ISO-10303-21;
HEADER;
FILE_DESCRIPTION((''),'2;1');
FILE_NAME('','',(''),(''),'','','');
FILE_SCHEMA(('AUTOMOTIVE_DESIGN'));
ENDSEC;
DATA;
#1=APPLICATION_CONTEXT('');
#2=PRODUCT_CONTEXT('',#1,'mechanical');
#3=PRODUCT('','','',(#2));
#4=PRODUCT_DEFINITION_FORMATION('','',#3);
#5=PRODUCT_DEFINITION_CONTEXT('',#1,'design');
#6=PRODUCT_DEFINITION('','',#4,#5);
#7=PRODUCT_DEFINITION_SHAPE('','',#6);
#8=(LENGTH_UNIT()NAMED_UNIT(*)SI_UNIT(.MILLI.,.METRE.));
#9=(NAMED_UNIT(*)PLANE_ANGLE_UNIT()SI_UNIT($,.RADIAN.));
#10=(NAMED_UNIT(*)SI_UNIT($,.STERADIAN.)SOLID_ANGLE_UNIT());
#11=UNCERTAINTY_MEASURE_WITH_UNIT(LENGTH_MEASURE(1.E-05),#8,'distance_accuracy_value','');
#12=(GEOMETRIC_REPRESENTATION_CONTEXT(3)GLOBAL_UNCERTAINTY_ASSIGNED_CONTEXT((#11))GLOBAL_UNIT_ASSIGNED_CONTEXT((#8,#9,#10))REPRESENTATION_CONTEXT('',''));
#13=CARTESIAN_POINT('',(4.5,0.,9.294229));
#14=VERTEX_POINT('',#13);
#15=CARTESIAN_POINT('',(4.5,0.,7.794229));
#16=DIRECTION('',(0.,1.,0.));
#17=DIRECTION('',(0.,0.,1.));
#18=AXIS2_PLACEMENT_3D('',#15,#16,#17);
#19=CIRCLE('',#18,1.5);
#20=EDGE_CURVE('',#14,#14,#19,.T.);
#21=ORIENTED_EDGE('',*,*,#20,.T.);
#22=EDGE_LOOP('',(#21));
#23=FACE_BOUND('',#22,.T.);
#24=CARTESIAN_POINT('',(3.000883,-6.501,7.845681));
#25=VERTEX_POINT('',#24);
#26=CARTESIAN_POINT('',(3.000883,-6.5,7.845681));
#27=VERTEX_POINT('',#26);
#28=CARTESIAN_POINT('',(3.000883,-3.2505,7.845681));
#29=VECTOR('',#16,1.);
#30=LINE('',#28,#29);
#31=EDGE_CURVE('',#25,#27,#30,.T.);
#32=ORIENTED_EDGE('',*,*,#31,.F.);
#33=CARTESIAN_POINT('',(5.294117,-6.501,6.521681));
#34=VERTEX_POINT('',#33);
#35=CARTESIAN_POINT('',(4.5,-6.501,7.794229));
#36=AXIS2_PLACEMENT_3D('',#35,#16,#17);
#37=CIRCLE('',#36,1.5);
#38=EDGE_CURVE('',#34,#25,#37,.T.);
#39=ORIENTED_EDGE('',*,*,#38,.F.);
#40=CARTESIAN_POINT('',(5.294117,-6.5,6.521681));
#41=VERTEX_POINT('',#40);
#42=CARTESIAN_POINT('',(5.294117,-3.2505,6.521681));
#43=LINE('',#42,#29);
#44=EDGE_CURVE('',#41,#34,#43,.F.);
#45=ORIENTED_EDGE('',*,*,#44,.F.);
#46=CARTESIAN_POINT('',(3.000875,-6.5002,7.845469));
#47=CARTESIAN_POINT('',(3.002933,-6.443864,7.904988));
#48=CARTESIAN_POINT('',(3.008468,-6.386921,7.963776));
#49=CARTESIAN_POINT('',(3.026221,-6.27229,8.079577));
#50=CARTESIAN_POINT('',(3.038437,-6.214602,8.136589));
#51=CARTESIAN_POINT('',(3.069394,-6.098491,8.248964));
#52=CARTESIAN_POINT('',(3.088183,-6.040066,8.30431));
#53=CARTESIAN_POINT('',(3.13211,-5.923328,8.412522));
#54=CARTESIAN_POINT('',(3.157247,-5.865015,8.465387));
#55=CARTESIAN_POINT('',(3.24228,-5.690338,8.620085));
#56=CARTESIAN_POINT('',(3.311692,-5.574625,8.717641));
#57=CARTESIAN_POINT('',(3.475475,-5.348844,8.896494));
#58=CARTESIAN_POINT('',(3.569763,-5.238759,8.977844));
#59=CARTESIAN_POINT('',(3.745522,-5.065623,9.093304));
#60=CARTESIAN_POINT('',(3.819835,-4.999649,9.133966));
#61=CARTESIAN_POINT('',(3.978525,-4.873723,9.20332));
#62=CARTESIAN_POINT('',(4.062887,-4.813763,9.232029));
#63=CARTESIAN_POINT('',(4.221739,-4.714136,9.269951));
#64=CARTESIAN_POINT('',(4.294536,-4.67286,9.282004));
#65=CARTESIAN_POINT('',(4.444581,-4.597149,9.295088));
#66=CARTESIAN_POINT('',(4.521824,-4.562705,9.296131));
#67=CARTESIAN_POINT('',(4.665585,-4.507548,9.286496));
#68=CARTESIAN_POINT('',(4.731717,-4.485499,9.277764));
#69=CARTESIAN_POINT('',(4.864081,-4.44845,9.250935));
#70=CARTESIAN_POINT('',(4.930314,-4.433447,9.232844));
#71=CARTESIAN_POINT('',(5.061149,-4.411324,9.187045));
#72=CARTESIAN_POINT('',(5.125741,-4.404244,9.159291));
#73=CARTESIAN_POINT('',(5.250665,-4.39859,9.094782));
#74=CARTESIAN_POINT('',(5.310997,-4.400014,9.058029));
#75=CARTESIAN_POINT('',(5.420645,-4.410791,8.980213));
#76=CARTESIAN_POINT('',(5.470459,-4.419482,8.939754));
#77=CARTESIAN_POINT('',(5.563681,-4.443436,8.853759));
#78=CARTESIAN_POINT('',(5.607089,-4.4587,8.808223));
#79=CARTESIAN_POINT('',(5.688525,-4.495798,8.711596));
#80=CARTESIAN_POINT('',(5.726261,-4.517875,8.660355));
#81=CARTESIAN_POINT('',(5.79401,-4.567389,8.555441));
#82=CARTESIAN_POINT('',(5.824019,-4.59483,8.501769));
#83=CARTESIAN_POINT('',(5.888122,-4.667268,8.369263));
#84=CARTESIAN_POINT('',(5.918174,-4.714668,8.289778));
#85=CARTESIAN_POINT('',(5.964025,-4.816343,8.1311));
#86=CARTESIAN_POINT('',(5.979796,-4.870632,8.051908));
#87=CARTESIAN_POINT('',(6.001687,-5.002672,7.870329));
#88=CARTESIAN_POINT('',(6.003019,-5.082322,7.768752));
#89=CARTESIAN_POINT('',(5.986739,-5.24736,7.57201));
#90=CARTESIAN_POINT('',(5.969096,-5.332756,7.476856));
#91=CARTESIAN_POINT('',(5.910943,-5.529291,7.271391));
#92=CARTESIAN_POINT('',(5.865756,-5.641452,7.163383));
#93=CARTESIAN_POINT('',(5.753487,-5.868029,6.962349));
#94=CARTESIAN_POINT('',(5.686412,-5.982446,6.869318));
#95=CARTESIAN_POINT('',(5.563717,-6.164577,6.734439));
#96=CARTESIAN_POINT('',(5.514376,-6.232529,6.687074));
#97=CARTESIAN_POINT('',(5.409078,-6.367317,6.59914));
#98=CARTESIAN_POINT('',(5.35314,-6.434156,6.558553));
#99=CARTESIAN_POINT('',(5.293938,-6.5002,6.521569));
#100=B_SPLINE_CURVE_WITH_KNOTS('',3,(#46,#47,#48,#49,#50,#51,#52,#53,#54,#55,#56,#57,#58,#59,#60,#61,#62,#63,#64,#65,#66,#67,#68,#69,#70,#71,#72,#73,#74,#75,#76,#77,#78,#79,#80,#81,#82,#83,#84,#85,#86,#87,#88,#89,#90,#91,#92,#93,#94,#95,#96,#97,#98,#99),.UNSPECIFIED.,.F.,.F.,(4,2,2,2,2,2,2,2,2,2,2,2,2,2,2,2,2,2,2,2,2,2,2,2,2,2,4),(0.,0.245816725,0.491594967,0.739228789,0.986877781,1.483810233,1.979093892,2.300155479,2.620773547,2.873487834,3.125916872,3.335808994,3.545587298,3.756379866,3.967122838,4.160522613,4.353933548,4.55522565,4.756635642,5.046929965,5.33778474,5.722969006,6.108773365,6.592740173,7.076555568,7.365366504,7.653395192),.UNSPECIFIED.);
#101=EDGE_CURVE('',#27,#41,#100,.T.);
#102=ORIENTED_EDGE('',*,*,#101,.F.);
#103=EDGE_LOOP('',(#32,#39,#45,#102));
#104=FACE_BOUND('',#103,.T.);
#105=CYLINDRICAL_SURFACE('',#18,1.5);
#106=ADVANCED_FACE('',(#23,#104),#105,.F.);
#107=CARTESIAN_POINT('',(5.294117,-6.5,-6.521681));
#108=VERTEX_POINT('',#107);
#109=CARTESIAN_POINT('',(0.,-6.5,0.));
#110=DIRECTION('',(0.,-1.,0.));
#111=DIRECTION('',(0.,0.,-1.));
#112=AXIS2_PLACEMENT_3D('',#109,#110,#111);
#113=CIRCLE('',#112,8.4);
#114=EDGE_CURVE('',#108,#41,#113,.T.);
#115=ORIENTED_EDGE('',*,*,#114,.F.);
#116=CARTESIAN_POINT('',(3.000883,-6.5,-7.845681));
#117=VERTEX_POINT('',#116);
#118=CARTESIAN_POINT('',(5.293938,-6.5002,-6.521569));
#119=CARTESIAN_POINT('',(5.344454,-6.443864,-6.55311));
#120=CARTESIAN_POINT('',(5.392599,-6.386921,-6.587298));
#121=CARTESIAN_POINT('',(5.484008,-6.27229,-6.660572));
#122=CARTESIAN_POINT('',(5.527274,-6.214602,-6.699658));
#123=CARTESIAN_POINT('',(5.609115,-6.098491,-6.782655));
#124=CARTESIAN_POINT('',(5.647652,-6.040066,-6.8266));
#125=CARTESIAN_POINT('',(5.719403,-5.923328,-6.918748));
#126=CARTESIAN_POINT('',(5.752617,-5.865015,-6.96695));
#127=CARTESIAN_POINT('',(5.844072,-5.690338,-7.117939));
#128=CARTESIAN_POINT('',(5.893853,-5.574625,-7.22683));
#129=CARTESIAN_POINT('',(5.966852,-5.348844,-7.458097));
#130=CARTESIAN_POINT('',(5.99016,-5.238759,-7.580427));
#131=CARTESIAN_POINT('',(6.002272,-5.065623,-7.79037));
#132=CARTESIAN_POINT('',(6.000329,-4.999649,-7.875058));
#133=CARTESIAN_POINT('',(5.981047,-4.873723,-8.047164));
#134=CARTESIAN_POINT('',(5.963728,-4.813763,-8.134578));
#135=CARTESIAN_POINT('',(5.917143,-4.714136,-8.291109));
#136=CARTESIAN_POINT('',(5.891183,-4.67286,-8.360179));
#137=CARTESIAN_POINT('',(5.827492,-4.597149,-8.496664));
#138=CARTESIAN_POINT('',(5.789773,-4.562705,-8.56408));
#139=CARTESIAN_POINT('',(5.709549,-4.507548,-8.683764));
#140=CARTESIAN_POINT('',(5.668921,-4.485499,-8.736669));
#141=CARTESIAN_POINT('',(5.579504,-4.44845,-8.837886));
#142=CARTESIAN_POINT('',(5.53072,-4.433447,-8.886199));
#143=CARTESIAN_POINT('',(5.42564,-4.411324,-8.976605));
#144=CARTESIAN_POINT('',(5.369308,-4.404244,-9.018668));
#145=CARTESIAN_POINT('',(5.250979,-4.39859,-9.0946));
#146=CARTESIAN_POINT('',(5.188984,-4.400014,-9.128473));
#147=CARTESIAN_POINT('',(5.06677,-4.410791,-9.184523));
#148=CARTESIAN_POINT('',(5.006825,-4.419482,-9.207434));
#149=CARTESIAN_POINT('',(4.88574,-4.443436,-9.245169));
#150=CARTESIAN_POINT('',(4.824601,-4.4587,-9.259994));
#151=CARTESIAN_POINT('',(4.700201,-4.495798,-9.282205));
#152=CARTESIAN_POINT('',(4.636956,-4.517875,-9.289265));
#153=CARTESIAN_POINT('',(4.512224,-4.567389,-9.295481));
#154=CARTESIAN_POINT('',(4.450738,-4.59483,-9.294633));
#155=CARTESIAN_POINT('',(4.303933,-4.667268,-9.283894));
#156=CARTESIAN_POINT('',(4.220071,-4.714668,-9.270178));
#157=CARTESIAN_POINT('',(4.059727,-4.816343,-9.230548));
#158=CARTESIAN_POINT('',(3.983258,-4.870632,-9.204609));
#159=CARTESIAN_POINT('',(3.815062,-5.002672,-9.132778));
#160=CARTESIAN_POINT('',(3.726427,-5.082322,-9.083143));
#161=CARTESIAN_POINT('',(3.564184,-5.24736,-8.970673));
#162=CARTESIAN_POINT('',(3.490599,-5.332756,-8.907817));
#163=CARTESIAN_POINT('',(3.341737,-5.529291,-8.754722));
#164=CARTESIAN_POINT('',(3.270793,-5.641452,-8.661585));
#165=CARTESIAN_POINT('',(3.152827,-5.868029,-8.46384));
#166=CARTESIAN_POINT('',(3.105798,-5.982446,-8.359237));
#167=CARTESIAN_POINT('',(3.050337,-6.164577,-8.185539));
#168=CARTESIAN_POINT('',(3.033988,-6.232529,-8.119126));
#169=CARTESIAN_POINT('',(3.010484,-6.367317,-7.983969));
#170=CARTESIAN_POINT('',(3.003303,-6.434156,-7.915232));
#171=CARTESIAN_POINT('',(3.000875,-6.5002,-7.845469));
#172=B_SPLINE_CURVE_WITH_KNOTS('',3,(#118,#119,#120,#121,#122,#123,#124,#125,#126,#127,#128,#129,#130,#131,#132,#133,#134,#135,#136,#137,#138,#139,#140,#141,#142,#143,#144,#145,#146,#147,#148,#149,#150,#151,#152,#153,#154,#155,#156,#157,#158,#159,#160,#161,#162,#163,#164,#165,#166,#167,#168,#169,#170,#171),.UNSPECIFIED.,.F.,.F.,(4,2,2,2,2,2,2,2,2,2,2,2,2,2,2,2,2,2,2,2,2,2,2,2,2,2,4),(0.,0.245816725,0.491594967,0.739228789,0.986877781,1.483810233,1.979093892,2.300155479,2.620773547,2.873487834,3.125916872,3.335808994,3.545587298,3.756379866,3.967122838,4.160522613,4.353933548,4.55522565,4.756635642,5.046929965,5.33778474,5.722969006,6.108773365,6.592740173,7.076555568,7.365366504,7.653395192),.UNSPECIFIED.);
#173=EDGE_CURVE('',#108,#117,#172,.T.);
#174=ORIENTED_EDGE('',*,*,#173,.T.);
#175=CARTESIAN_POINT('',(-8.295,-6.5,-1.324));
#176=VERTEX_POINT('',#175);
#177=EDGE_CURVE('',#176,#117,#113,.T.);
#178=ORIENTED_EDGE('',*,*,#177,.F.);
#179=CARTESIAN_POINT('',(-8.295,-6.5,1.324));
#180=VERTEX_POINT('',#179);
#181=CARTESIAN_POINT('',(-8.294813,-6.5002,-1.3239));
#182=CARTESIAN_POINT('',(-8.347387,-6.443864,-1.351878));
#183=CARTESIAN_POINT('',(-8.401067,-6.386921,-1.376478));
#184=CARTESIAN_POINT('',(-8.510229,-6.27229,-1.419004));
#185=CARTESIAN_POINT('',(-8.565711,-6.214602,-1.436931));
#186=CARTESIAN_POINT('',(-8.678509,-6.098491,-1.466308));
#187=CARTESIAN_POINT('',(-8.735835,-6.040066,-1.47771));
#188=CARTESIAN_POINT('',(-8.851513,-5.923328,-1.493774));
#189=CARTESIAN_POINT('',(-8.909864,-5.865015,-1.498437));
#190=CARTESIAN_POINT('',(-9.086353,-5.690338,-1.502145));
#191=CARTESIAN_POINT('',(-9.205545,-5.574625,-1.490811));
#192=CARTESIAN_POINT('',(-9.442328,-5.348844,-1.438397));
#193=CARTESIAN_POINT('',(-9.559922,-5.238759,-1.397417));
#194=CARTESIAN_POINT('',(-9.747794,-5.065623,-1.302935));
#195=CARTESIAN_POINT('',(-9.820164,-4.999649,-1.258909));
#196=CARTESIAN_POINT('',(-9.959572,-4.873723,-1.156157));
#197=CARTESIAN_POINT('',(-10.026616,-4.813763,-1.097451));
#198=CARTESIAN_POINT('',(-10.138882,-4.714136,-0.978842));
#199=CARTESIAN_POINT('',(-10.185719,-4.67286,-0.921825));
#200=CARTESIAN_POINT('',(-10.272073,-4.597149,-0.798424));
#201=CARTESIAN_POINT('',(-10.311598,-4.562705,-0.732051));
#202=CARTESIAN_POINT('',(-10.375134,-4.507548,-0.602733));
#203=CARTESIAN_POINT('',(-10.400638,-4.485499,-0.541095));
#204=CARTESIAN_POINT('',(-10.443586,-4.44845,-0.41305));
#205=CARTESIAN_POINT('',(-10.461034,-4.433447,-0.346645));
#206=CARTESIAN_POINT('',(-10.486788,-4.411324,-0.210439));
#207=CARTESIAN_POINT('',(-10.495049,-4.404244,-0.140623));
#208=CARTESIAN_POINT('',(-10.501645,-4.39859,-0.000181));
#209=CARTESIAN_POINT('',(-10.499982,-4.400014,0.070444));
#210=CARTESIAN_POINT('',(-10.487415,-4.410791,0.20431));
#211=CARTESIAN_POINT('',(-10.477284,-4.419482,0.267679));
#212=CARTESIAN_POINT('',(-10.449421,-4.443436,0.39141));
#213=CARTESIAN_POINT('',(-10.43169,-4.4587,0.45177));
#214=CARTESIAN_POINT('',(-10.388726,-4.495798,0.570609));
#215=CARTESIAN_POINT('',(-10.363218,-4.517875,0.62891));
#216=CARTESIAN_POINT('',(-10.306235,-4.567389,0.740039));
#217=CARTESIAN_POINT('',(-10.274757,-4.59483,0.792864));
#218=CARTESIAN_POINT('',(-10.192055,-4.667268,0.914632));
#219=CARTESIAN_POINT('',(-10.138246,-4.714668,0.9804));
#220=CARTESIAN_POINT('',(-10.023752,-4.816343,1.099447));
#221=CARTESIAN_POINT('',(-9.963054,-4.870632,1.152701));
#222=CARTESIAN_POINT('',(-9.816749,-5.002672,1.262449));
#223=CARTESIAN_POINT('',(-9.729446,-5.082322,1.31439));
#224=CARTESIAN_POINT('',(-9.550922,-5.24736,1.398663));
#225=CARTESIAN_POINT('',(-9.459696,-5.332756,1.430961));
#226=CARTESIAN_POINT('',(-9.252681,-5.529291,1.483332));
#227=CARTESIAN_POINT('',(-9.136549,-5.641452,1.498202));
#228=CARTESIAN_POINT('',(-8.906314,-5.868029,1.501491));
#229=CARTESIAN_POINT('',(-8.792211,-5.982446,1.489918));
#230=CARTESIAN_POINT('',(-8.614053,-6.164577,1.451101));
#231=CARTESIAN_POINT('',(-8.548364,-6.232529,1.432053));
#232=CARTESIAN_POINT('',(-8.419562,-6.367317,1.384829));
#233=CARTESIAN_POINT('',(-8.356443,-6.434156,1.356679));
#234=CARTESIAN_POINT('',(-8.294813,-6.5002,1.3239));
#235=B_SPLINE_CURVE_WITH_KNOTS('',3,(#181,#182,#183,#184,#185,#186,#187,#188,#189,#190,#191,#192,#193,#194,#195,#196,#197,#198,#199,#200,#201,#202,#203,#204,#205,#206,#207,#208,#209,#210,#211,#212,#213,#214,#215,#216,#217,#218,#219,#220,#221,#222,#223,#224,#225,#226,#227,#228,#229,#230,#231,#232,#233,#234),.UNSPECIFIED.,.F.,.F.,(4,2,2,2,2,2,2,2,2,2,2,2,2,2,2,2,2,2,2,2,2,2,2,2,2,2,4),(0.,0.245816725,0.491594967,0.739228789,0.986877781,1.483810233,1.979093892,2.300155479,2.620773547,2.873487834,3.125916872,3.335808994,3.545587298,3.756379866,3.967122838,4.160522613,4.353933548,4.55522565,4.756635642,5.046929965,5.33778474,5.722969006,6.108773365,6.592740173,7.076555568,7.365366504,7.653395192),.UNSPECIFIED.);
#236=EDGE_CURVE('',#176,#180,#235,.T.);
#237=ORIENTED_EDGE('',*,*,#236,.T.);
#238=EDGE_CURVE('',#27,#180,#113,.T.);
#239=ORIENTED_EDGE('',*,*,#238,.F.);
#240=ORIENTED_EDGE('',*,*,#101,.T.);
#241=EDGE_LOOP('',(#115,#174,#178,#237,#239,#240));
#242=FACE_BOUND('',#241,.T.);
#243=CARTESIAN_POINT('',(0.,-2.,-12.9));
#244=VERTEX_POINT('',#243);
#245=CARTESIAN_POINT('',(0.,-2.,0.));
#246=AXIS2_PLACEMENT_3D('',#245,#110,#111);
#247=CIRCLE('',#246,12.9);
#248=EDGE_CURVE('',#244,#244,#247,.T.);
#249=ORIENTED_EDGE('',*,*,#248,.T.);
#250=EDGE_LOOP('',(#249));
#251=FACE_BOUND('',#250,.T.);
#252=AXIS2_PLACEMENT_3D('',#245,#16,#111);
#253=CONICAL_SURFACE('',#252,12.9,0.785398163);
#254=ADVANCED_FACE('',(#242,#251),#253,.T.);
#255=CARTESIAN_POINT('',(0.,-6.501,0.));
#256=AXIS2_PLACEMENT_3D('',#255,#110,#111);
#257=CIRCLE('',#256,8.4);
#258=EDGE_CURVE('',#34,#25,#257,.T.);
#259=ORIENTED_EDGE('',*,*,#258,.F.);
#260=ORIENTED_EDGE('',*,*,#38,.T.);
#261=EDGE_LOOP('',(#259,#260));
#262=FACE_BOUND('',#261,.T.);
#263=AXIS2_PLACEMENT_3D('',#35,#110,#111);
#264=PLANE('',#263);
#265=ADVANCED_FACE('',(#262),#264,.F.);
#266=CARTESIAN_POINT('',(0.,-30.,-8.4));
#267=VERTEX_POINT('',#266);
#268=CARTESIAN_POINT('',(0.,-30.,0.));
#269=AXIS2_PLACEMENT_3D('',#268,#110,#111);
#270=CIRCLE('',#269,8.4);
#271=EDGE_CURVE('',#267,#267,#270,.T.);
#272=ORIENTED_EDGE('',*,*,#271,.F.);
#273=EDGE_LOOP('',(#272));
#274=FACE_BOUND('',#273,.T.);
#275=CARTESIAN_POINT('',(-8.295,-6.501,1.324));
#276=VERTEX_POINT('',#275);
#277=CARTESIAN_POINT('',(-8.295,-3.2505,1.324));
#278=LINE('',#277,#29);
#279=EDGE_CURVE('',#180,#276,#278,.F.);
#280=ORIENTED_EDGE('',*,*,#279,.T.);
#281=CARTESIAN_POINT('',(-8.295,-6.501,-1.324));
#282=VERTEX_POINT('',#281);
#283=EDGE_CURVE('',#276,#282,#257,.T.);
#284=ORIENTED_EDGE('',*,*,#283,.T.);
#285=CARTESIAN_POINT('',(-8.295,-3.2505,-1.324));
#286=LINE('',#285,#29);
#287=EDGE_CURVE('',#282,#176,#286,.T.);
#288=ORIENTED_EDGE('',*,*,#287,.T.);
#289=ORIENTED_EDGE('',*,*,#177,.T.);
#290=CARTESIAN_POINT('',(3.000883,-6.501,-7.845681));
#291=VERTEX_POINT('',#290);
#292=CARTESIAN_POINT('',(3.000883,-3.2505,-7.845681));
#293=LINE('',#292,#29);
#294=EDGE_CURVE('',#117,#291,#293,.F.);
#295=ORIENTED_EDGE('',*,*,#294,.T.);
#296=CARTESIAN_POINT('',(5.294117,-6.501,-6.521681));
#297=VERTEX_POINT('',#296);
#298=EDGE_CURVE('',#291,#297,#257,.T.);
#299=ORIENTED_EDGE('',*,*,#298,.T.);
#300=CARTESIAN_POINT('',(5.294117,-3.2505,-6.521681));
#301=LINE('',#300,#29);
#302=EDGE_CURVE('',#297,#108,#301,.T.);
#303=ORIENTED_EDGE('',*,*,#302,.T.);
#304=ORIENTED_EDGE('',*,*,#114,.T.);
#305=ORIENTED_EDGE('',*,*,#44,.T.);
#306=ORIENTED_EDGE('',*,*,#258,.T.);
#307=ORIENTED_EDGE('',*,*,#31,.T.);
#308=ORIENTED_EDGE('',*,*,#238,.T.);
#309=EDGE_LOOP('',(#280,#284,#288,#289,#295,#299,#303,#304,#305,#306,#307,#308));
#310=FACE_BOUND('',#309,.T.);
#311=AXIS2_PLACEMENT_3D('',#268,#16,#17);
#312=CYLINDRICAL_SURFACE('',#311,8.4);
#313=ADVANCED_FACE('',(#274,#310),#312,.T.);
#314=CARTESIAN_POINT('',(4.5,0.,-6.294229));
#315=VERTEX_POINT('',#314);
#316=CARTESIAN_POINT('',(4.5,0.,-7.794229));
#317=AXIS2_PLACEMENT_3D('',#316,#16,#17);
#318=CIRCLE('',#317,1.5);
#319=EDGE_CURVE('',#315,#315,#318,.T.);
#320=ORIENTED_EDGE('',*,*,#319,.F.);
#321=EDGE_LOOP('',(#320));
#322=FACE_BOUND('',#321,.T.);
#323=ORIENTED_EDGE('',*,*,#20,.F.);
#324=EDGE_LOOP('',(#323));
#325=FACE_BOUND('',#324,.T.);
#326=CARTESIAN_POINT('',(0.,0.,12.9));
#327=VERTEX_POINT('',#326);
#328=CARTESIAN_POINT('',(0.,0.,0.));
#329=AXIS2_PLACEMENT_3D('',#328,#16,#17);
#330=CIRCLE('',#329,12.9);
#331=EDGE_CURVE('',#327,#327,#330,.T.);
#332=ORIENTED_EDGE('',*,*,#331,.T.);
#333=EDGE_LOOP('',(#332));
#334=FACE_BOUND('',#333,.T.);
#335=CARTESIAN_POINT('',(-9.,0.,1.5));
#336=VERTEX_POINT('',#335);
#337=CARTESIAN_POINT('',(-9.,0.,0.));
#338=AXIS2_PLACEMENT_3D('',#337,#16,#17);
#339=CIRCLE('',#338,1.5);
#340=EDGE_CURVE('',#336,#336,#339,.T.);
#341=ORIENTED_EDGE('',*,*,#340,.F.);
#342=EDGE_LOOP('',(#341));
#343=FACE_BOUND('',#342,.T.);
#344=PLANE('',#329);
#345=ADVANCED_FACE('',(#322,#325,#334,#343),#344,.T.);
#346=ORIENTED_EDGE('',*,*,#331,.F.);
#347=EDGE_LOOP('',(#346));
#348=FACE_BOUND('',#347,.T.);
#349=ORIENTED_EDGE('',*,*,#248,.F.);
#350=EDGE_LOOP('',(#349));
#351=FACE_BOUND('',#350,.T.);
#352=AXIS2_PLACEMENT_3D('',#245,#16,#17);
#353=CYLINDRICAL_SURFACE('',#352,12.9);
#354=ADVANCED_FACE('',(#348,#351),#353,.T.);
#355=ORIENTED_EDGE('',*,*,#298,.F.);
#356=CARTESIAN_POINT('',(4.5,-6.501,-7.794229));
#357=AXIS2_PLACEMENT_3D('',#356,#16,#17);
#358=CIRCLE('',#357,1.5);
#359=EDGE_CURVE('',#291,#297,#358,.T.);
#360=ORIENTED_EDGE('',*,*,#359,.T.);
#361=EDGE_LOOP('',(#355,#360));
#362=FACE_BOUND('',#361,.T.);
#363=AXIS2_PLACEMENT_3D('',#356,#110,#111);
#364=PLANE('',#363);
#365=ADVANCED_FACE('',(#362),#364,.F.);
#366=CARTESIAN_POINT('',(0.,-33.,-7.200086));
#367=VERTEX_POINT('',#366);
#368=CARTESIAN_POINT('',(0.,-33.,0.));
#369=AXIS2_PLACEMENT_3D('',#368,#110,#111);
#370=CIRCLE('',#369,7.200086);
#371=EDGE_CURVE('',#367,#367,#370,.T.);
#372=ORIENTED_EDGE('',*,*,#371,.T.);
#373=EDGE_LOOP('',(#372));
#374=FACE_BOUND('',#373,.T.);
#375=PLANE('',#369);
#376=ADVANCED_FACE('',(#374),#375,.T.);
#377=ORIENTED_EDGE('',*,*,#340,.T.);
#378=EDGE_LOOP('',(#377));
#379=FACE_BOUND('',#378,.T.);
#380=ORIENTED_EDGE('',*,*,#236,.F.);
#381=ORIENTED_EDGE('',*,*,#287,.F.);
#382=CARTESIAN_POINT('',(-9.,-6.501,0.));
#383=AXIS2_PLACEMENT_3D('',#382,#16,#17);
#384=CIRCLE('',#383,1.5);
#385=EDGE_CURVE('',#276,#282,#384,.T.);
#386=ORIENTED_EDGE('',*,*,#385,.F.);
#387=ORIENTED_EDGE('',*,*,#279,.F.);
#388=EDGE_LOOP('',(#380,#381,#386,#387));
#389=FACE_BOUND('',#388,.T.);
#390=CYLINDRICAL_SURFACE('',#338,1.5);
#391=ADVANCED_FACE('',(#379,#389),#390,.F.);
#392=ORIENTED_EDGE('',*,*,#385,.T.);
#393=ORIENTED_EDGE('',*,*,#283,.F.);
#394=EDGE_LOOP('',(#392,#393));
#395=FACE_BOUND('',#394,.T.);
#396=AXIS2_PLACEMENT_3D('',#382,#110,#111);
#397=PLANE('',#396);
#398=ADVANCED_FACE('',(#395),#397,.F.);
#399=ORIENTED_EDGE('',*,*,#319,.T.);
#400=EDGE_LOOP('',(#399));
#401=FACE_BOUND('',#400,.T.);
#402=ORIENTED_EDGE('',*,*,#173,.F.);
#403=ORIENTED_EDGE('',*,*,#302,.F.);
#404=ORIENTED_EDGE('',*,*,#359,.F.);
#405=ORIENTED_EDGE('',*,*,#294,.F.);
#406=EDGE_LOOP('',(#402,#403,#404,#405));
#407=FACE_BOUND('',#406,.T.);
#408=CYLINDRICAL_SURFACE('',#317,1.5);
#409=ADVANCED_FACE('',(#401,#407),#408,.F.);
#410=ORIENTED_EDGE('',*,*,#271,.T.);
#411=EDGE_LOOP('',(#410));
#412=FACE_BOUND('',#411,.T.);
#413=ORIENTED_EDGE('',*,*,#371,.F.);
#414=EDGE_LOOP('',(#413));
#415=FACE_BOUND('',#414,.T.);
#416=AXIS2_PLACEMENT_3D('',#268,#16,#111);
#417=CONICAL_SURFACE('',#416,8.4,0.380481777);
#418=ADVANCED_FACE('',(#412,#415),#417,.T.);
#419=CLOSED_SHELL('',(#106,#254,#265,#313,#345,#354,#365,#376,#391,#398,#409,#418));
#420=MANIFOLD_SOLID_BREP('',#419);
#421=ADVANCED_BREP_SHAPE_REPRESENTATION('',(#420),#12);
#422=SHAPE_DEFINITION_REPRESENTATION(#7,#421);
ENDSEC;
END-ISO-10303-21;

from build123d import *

# Parameters (mm, degrees)
SKETCH1_R                     = 12.9
BOSS_EXTRUDE1_DEPTH           = 2
SKETCH2_R                     = 12.9
BOSS_EXTRUDE2_DEPTH           = 4.5
BOSS_EXTRUDE2_TAPER           = 45
SKETCH3_R                     = 8.4
BOSS_EXTRUDE3_DEPTH           = 23.5
SKETCH5_R                     = 8.4
BOSS_EXTRUDE4_DEPTH           = 3
BOSS_EXTRUDE4_TAPER           = 21.8
F_6_0MM_START                 = -6.501
F_6_0MM_DOWEL_HOLE1_OUTLINE_R = 1.5
F_6_0MM_DOWEL_HOLE1_DEPTH     = 6.501


# Read off the part's stored shape, not the designer's step: Ø6.0mm Dowel Hole1
with BuildPart() as part:
    # Sketch1 → Boss-Extrude1 (new body)
    with BuildSketch(Plane(origin=(0, 0, 0), x_dir=(1, 0, 0), z_dir=(0, 1, 0))):
        with Locations(Location((0, 0, 0), (0, 0, 270))):
            Circle(SKETCH1_R)
    extrude(amount=-BOSS_EXTRUDE1_DEPTH)

    # Sketch2 → Boss-Extrude2 (add)
    with BuildSketch(Plane.XZ.offset(2)):
        with Locations(Location((0, 0, 0), (0, 0, 90))):
            Circle(SKETCH2_R)
    extrude(amount=BOSS_EXTRUDE2_DEPTH, taper=BOSS_EXTRUDE2_TAPER)

    # Sketch3 → Boss-Extrude3 (add)
    with BuildSketch(Plane.XZ.offset(6.5)):
        with Locations(Location((0, 0, 0), (0, 0, 270))):
            Circle(SKETCH3_R)
    extrude(amount=BOSS_EXTRUDE3_DEPTH)

    # Sketch5 → Boss-Extrude4 (add)
    with BuildSketch(Plane.XZ.offset(30)):
        with Locations(Location((0, 0, 0), (0, 0, 270))):
            Circle(SKETCH5_R)
    extrude(amount=BOSS_EXTRUDE4_DEPTH, taper=BOSS_EXTRUDE4_TAPER)

    # Ø6.0mm Dowel Hole1 outline → Ø6.0mm Dowel Hole1 (cut)
    with BuildSketch(Plane(origin=(0, 0, 0), x_dir=(1, 0, 0), z_dir=(0, 1, 0)).offset(F_6_0MM_START)):
        with Locations((4.5, -7.794228634)):
            Circle(F_6_0MM_DOWEL_HOLE1_OUTLINE_R)
        with Locations((4.5, 7.794228634)):
            Circle(F_6_0MM_DOWEL_HOLE1_OUTLINE_R)
        with Locations((-9, 0)):
            Circle(F_6_0MM_DOWEL_HOLE1_OUTLINE_R)
    extrude(amount=F_6_0MM_DOWEL_HOLE1_DEPTH, mode=Mode.SUBTRACT)


solid = part.part
